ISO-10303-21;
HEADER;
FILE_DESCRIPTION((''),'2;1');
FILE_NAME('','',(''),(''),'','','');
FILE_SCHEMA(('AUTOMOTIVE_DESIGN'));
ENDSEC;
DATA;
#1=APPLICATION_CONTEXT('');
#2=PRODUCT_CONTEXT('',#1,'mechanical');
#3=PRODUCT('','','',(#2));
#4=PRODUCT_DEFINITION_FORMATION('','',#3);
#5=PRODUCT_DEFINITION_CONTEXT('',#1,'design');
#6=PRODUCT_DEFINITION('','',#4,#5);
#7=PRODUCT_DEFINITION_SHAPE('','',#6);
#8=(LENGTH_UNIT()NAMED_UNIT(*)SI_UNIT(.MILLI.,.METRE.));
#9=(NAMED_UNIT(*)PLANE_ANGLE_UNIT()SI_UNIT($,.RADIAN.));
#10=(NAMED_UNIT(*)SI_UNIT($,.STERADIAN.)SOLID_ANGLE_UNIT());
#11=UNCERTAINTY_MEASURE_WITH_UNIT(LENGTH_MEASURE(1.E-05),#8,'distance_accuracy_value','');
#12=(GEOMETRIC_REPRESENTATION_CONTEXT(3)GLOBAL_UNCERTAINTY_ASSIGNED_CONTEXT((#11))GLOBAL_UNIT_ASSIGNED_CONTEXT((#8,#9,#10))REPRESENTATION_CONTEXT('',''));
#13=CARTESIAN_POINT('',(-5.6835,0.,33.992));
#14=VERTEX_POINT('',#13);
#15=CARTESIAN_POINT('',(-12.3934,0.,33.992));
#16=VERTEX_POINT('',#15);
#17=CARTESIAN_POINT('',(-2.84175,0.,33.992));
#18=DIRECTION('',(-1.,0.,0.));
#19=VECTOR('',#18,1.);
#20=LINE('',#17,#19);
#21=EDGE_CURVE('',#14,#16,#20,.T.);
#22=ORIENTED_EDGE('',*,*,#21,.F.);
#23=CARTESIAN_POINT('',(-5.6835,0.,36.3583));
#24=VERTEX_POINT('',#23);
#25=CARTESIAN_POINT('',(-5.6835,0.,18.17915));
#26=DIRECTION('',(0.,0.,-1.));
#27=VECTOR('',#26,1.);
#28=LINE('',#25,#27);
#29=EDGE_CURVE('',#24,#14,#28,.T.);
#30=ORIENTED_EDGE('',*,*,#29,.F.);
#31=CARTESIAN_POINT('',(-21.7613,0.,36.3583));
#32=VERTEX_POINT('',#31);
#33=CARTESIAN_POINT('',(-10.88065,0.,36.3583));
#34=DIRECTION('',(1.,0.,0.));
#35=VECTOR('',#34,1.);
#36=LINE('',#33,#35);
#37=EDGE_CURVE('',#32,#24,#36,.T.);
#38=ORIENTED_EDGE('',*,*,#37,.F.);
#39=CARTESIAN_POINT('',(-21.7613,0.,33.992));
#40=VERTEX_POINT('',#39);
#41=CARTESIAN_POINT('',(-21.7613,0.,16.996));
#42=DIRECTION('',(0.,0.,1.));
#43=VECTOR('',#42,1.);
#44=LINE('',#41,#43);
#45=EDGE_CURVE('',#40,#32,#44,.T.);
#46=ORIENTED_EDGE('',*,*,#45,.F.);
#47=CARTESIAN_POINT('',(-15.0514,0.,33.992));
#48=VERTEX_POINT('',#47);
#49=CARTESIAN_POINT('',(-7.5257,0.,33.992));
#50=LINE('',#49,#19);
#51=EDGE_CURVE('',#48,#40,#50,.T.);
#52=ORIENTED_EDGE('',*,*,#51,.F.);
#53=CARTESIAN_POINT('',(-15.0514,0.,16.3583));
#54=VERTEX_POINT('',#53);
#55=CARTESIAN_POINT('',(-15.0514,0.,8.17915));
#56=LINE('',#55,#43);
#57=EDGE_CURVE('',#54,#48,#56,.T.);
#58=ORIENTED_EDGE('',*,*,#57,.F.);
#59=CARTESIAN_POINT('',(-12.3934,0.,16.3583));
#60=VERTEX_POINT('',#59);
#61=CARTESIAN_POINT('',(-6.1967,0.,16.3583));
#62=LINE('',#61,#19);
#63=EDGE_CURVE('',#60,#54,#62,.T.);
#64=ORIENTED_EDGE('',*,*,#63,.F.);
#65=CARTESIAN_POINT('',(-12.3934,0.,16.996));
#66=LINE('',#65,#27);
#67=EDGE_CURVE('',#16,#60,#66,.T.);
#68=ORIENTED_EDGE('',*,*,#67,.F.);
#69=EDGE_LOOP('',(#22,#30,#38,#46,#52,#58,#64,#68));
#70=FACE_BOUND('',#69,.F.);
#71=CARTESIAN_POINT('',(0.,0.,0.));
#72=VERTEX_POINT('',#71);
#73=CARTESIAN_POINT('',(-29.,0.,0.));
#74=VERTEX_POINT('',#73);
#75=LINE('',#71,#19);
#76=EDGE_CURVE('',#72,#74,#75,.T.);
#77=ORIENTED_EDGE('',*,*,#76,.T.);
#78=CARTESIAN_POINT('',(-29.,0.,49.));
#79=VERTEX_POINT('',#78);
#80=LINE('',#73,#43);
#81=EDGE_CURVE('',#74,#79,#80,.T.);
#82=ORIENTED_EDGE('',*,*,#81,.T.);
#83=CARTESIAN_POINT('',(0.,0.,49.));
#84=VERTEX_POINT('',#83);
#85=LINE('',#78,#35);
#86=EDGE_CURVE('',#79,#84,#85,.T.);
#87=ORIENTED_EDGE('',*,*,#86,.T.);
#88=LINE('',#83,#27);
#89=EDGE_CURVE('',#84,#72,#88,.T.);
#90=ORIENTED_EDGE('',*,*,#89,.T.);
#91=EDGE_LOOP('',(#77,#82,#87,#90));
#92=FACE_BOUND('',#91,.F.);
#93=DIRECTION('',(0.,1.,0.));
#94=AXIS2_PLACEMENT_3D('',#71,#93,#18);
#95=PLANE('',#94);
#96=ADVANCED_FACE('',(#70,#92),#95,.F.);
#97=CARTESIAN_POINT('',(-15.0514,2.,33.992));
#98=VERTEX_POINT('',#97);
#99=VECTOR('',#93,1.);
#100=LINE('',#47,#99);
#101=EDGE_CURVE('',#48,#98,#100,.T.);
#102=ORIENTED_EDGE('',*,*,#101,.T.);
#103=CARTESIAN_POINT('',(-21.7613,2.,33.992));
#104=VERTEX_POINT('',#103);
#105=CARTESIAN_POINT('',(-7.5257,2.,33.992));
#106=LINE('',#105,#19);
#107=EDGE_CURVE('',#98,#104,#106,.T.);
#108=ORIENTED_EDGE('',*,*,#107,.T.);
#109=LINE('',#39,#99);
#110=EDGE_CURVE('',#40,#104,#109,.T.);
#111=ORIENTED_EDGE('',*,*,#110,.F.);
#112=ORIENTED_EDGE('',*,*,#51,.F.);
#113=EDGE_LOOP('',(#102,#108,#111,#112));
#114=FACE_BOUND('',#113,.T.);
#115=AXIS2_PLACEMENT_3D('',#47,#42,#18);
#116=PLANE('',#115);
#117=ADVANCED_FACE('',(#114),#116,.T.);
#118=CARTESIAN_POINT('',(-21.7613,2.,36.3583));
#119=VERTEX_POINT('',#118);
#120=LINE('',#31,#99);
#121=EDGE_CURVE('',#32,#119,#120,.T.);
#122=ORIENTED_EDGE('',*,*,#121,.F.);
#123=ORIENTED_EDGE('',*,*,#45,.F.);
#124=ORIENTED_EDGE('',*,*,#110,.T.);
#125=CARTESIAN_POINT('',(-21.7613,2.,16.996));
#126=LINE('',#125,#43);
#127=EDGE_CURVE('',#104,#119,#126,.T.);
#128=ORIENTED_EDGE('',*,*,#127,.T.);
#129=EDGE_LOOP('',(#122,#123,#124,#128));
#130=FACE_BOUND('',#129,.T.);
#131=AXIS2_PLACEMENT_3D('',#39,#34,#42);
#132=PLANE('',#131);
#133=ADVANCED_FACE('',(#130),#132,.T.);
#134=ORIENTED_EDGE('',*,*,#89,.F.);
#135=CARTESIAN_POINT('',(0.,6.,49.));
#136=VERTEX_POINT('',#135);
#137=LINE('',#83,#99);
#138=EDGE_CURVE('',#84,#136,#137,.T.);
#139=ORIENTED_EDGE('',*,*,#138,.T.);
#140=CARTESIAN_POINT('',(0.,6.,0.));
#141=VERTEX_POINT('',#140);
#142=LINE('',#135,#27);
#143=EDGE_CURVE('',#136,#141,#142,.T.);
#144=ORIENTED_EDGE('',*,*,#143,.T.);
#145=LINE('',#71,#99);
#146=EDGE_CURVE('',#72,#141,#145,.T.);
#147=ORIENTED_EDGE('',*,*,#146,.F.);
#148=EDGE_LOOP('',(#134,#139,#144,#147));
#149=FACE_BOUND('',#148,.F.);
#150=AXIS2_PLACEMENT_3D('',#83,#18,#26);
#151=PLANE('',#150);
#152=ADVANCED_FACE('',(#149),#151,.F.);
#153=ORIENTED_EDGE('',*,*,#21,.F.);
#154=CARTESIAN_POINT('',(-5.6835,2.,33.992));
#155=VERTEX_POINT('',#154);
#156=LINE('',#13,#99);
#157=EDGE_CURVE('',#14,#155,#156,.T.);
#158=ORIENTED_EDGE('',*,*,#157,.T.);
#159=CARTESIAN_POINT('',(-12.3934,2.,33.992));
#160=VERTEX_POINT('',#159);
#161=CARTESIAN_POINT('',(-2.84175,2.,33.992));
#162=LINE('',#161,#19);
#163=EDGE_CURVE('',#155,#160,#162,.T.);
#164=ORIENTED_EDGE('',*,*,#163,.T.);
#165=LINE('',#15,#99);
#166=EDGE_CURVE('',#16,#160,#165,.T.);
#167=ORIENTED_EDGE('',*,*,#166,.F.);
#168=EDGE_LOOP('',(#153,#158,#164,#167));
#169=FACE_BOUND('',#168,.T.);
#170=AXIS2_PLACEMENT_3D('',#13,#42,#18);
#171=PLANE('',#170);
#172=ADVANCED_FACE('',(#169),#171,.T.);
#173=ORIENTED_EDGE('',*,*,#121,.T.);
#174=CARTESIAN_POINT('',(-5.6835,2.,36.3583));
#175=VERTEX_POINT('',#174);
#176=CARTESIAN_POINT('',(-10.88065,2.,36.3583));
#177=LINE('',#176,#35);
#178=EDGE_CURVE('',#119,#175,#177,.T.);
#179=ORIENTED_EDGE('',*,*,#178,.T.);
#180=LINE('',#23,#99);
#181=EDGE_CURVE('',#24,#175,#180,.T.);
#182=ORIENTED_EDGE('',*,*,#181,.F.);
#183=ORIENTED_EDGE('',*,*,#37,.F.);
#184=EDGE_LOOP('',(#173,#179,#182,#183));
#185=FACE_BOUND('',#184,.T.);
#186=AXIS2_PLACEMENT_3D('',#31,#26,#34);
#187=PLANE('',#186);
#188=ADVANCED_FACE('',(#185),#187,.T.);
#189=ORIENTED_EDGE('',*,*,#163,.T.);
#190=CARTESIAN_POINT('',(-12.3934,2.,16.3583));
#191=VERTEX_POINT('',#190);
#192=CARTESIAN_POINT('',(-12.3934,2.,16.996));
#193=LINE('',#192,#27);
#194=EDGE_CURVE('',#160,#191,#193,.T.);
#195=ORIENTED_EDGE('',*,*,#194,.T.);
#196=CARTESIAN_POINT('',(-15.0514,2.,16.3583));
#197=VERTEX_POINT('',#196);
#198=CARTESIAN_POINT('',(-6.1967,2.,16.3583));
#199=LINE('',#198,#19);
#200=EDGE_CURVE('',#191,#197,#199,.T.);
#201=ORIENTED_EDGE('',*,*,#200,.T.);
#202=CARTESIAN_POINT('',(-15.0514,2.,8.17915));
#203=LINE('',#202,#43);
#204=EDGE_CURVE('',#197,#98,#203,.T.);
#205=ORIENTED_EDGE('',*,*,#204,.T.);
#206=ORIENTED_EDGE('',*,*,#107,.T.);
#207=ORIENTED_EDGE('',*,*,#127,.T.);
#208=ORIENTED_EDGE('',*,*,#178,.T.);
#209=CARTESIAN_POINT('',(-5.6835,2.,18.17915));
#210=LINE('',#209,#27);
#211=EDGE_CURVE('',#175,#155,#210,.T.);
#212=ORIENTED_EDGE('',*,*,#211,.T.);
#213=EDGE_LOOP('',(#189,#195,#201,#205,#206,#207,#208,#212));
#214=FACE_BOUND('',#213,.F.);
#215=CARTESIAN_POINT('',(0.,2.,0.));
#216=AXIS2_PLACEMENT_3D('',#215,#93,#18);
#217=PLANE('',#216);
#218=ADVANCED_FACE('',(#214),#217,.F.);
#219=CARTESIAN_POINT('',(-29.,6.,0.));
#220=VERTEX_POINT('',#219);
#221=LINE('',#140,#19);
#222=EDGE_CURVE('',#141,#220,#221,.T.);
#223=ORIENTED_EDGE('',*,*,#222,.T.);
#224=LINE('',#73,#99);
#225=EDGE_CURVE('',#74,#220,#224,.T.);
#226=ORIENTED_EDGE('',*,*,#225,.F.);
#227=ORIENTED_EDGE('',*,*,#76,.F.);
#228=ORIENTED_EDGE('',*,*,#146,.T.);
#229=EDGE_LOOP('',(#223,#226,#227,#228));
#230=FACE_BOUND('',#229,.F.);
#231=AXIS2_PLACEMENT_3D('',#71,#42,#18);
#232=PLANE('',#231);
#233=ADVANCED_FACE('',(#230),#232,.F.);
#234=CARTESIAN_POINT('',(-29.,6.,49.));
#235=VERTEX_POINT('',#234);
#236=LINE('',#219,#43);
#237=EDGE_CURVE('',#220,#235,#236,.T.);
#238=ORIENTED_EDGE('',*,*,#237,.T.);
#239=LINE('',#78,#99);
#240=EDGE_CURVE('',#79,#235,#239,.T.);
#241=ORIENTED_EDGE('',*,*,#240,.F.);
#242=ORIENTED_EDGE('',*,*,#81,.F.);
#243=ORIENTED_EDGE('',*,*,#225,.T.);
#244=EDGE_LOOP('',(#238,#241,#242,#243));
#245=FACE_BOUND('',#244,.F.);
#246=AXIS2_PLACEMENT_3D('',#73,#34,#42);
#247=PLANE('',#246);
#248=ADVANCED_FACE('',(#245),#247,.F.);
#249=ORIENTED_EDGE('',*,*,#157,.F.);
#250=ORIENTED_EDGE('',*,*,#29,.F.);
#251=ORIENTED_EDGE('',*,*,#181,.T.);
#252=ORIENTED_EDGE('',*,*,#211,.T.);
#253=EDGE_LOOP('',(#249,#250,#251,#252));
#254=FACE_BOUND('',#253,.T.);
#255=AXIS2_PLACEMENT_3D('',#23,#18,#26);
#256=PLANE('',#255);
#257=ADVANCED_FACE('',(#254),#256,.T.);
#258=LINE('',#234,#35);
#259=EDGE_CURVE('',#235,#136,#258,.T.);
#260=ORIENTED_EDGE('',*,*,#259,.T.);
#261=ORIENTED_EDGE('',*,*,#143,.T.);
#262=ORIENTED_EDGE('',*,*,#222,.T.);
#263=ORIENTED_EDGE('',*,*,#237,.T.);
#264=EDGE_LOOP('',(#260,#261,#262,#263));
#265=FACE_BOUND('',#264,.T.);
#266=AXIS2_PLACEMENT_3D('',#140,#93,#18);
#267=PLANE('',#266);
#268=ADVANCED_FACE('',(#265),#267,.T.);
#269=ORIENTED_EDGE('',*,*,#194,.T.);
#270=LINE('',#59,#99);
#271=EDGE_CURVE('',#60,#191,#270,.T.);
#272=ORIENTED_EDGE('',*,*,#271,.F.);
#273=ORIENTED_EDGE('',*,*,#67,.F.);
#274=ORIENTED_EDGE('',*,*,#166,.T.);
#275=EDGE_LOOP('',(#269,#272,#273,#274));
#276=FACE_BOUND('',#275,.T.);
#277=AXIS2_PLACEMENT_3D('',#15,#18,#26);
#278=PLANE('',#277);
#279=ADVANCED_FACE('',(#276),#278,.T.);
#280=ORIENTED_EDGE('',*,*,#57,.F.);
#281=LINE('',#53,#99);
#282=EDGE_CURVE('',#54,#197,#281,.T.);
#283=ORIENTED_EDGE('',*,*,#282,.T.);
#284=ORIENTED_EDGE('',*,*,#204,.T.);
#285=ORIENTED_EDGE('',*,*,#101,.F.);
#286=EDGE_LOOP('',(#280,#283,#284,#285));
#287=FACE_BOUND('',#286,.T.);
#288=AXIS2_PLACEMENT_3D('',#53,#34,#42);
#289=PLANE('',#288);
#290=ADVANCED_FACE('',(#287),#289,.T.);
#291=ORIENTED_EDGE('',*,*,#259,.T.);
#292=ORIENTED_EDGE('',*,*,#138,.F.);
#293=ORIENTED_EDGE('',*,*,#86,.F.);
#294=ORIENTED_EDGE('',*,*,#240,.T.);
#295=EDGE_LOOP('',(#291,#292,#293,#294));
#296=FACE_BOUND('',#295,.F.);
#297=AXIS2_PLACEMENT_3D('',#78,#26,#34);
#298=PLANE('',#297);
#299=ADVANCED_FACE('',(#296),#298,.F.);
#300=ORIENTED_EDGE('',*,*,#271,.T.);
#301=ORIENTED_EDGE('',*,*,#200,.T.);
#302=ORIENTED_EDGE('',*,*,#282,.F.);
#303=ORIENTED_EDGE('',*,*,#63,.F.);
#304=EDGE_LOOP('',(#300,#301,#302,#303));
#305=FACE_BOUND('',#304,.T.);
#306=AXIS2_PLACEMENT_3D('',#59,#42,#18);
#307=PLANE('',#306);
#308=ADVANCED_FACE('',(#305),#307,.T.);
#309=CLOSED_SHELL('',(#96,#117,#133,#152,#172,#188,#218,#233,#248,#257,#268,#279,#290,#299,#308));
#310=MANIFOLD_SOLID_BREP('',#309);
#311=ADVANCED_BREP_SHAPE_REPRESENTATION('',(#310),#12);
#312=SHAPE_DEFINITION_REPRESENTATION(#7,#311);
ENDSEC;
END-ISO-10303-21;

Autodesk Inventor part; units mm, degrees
ref_plane "YZ Plane" through (0, 0, 0) normal (1, 0, 0) x (0, 1, 0)
ref_plane "XZ Plane" through (0, 0, 0) normal (0, 1, 0) x (-1, 0, 0)
ref_plane "XY Plane" through (0, 0, 0) normal (0, 0, 1) x (1, 0, 0)
sketch "Sketch1" plane through (0, 0, 0) normal (0, 1, 0) x (-1, 0, 0)
  line L0 (0, 0) -> (29, 0)
  line L1 (29, 0) -> (29, 49)
  line L2 (29, 49) -> (0, 49)
  line L3 (0, 49) -> (0, 0)
  dimension "d0" = 49
  dimension "d1" = 29
extrude "Extrusion1" add sketch "Sketch1" along normal blind 6
sketch "Sketch2" plane through (0, 0, 0) normal (0, -1, 0) x (1, 0, 0)
  line L0 (-21.7451, 36.3583) -> (64.7541, 36.3583) construction
  line L1 (64.7541, 36.3583) -> (64.7541, 15.5155) construction
  line L2 (64.7541, 15.5155) -> (-21.7451, 15.5155) construction
  line L3 (-21.7451, 15.5155) -> (-21.7451, 36.3583) construction
  line L4 (-15.0514, 16.3583) -> (-15.0514, 33.992)
  line L5 (-15.0514, 33.992) -> (-21.7613, 33.992)
  line L6 (-21.7613, 33.992) -> (-21.7613, 36.3583)
  line L7 (-21.7613, 36.3583) -> (-5.6835, 36.3583)
  line L8 (-5.6835, 36.3583) -> (-5.6835, 33.992)
  line L9 (-5.6835, 33.992) -> (-12.3934, 33.992)
  line L10 (-12.3934, 33.992) -> (-12.3934, 16.3583)
  line L11 (-12.3934, 16.3583) -> (-15.0514, 16.3583)
  point P0 (0, 0)
emboss "Emboss1" sketch "Sketch2" operation cut depth 2 direction (0, 1, 0)
properties part number "pegshort" material "PET Plastic"
